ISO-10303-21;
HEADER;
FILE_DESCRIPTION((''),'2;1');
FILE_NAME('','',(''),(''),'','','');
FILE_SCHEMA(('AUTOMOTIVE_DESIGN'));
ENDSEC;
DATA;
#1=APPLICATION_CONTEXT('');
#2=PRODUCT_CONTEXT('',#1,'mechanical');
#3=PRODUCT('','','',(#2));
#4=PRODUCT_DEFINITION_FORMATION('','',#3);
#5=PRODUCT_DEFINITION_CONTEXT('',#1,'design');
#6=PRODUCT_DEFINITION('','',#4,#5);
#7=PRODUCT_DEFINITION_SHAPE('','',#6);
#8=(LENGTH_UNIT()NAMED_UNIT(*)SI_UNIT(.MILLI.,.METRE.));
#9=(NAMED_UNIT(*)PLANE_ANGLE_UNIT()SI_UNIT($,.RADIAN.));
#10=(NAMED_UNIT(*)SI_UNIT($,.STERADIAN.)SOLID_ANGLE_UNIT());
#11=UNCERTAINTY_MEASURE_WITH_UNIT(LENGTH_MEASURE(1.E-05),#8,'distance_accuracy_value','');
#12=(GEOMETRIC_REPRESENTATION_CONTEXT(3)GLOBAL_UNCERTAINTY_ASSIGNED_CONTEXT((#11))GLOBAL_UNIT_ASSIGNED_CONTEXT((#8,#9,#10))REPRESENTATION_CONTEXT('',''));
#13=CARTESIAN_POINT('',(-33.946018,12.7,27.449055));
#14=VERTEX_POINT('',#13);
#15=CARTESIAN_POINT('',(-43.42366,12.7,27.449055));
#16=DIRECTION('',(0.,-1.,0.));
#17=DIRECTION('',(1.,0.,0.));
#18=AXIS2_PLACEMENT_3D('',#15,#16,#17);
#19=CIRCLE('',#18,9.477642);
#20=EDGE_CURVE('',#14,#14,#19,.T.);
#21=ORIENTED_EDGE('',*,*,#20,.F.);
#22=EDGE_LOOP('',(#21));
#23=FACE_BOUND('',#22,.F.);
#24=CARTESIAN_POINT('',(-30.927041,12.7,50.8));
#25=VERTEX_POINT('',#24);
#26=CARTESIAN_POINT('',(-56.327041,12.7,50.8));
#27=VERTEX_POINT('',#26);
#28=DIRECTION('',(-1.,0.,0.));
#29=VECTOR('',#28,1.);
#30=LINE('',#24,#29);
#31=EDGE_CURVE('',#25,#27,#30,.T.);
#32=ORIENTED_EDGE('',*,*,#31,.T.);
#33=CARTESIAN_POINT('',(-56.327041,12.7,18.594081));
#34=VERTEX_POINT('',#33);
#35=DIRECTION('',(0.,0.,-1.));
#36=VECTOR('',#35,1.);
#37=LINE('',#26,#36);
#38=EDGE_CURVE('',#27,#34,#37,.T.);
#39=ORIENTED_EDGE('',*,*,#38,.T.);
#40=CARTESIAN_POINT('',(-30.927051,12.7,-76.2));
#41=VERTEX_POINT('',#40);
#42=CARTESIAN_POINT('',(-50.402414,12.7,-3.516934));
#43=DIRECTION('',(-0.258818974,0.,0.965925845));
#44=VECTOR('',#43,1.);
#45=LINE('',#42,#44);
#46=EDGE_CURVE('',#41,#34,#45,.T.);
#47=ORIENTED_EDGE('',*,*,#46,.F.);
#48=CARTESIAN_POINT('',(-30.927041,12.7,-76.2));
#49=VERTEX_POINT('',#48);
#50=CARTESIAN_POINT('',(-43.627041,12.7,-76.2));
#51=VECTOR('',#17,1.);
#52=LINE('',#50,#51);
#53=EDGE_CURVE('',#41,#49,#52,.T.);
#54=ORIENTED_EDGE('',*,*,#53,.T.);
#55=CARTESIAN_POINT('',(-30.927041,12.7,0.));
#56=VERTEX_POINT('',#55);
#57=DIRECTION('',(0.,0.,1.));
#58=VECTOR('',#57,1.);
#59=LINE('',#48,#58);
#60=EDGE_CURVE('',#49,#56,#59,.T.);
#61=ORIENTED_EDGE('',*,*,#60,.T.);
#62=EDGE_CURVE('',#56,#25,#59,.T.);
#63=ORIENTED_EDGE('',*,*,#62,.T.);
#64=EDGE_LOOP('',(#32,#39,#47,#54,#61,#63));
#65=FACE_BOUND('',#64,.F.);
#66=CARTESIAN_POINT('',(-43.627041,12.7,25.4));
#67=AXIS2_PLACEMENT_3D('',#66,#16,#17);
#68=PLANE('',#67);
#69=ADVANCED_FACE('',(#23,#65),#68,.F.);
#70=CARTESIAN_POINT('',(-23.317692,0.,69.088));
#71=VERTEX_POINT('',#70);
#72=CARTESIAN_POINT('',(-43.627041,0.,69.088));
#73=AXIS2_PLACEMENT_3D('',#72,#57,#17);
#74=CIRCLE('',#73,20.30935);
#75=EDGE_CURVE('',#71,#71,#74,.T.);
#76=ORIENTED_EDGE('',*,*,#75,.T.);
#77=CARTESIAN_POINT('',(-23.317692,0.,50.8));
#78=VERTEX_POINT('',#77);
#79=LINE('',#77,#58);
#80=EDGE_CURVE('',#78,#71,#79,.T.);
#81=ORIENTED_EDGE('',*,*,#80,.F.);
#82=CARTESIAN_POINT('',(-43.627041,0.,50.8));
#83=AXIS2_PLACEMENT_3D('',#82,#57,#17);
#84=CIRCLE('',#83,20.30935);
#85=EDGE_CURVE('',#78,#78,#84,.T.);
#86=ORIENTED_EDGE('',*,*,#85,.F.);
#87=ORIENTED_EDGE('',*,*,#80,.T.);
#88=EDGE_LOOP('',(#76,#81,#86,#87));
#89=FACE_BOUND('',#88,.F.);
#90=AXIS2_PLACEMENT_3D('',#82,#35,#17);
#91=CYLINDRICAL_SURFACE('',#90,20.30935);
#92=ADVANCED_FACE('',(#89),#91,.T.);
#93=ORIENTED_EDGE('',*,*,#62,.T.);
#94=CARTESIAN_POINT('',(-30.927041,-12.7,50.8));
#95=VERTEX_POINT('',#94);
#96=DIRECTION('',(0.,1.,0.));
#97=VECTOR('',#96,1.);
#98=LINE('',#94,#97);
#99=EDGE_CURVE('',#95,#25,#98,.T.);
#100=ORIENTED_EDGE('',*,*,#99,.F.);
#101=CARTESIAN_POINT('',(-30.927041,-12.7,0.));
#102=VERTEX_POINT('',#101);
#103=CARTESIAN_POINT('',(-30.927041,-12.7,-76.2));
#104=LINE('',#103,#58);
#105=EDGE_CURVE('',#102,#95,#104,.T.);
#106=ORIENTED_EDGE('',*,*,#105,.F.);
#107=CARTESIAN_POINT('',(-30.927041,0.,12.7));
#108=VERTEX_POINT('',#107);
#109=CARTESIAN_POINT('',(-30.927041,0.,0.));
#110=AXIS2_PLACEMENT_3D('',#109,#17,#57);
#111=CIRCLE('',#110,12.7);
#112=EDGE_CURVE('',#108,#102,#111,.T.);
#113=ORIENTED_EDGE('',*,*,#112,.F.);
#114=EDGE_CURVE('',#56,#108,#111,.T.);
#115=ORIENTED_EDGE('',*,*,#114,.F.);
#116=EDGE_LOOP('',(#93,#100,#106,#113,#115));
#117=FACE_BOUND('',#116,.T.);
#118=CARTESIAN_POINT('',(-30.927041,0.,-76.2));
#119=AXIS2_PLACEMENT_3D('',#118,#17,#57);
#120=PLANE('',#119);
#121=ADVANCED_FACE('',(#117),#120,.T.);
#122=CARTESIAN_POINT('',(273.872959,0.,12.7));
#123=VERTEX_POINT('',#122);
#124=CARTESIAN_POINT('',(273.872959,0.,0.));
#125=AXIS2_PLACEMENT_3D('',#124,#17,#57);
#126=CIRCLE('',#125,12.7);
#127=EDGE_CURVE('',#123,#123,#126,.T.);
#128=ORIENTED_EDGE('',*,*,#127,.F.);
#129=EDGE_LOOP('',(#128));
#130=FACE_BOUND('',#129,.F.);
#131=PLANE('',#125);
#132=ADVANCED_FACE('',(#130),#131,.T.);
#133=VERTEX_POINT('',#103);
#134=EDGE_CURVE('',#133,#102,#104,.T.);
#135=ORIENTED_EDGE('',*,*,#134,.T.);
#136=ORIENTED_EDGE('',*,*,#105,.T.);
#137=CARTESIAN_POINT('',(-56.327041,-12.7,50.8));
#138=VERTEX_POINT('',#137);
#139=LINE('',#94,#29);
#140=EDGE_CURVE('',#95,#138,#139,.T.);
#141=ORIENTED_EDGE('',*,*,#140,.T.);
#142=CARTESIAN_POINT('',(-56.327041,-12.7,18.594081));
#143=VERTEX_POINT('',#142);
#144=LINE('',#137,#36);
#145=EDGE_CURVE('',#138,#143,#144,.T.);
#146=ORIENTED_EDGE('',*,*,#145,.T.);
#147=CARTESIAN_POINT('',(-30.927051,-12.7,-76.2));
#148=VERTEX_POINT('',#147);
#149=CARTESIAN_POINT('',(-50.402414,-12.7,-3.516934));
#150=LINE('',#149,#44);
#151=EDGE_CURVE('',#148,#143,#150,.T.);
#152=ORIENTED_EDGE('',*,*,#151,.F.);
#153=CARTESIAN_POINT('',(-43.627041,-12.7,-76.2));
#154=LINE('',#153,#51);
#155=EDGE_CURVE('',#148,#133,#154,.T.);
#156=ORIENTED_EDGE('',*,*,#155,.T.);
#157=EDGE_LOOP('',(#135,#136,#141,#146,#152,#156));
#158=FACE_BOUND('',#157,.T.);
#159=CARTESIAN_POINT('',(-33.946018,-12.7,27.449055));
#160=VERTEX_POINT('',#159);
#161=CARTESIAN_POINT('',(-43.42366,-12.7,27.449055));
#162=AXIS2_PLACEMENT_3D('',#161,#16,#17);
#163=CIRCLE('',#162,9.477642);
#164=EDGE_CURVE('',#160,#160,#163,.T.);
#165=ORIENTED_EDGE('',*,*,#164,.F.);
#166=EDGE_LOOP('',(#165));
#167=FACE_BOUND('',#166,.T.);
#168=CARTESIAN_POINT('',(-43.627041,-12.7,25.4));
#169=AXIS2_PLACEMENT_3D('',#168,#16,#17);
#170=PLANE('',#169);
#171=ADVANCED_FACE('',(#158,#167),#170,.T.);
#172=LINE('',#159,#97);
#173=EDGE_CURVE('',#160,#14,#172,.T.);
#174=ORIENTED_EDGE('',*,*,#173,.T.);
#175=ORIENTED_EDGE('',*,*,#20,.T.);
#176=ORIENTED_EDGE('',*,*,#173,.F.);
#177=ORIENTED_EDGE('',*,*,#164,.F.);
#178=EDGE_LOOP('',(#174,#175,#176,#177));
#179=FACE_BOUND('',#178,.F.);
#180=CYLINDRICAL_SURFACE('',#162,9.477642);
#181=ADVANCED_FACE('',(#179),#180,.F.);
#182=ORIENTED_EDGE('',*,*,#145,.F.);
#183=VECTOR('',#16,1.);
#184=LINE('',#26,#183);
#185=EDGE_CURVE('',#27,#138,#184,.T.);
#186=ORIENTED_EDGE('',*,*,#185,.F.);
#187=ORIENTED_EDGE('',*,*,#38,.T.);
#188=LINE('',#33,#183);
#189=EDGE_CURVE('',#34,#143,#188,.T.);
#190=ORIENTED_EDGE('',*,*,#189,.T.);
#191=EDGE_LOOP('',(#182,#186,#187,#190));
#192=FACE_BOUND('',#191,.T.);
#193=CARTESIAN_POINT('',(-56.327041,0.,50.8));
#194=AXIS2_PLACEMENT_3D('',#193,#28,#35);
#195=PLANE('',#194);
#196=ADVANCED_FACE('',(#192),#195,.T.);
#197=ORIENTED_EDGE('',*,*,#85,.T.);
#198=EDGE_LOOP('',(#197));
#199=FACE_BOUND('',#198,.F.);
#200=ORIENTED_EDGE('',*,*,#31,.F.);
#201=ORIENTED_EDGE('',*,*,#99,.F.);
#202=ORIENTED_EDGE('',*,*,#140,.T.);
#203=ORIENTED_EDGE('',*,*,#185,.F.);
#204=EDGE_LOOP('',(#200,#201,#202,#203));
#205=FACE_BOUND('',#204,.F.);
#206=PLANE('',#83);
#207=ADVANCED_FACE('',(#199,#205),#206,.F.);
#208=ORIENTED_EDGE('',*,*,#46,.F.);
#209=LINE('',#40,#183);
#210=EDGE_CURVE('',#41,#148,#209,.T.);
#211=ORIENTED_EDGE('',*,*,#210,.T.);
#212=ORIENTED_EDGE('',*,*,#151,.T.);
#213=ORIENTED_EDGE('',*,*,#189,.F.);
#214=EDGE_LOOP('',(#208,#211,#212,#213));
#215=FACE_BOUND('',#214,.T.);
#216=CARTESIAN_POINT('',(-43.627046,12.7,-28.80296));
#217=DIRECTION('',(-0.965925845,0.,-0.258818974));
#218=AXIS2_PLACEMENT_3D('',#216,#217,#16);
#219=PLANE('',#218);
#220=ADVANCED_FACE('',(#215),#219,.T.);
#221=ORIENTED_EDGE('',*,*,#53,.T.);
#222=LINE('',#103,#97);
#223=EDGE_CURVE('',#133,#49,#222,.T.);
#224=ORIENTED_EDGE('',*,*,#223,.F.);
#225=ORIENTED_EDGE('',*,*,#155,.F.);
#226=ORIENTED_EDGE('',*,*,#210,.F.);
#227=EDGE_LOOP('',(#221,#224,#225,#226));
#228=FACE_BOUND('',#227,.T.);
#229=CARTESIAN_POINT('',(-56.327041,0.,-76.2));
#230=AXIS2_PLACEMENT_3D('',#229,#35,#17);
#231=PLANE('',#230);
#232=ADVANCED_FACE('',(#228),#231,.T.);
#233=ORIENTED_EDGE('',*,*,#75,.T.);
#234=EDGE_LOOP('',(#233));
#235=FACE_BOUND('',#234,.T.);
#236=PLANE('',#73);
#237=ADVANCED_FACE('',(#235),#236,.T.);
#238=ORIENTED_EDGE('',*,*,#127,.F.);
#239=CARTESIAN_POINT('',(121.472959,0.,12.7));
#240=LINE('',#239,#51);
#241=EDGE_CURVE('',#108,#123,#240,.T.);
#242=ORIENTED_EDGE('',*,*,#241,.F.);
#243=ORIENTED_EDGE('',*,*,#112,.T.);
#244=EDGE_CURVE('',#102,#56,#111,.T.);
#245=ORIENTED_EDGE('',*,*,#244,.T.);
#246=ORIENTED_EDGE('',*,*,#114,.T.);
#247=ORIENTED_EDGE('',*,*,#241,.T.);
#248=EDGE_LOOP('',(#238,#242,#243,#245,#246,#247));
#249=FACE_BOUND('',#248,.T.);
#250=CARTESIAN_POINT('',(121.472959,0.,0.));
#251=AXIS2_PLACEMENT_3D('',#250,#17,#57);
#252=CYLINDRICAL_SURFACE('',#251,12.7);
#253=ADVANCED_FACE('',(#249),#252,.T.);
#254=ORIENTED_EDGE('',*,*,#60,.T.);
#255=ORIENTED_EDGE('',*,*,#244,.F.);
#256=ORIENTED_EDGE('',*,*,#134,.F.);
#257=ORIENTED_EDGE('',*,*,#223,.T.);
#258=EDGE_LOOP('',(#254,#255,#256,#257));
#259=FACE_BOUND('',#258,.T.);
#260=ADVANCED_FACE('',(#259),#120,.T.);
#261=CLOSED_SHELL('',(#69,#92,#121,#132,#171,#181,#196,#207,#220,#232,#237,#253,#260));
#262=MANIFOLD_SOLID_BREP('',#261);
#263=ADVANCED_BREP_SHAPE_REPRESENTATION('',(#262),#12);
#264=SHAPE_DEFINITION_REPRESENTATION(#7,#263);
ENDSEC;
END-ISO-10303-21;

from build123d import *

# Parameters (mm, degrees)
F0_W     = 304.8
F0_H     = 12.7
F0_W_2   = 25.4
F0_H_2   = 76.2
F2_DEPTH = 12.7
F3_SIZE2 = 94.794081
F3_SIZE  = 25.39999
F4_R     = 20.3093495569
F4_W     = 25.4
F4_H     = 25.4
F5_DEPTH = 18.288
F6_R     = 9.4776416284
F7_DEPTH = 25.4


# Not quite as in the source:
# - a fillet or chamfer is up to 0.001 mm smaller than in the source, because OpenCascade refuses the exact size


with BuildPart() as f1:
    # F0 (on Front) → F1 (revolve)
    with BuildSketch(Plane.XZ):
        with Locations((121.4729587615, 6.35)):
            Rectangle(F0_W, F0_H)
    revolve(axis=Axis((121.4729587615, 0, 0), (1, 0, 0)))

    # F0 (on Front) → F2 (join, symmetric)
    with BuildSketch(Plane.XZ):
        Polygon((-56.3270412385, 0), (-30.9270412385, 0), (-30.9270412385, 12.7), (-30.9270412385, 50.8), (-56.3270412385, 50.8), align=None)
        with Locations((-43.6270412385, -38.1)):
            Rectangle(F0_W_2, F0_H_2)
    extrude(amount=F2_DEPTH, both=True)

    # F3 (size 25.4 and 94.7940905122 in the source; OpenCascade refuses exactly that, so slightly less here)
    f3_edges = [f1.edges().sort_by_distance(p)[0] for p in [
        (-56.327041, 0, -76.2),
    ]]
    f3_side = f1.faces().sort_by_distance((-43.627041, 0, -76.2))[0]
    chamfer(f3_edges, length=F3_SIZE, length2=F3_SIZE2, reference=f3_side)

    # F4 (on face) → F5 (join)
    with BuildSketch(Plane.XY.offset(50.8)):
        with Locations((-43.6270412385, 0)):
            Circle(F4_R)
        with Locations((-43.6270412385, 0)):
            Rectangle(F4_W, F4_H, mode=Mode.SUBTRACT)
        with Locations((-43.6270412385, 0)):
            Rectangle(F4_W, F4_H)
    extrude(amount=F5_DEPTH)

    # F6 (on face) → F7 (cut)
    with BuildSketch(Plane.XZ.offset(12.7)):
        with Locations((-43.4236600995, 27.4490546435)):
            Circle(F6_R)
    extrude(amount=-F7_DEPTH, mode=Mode.SUBTRACT)


solid = f1.part
